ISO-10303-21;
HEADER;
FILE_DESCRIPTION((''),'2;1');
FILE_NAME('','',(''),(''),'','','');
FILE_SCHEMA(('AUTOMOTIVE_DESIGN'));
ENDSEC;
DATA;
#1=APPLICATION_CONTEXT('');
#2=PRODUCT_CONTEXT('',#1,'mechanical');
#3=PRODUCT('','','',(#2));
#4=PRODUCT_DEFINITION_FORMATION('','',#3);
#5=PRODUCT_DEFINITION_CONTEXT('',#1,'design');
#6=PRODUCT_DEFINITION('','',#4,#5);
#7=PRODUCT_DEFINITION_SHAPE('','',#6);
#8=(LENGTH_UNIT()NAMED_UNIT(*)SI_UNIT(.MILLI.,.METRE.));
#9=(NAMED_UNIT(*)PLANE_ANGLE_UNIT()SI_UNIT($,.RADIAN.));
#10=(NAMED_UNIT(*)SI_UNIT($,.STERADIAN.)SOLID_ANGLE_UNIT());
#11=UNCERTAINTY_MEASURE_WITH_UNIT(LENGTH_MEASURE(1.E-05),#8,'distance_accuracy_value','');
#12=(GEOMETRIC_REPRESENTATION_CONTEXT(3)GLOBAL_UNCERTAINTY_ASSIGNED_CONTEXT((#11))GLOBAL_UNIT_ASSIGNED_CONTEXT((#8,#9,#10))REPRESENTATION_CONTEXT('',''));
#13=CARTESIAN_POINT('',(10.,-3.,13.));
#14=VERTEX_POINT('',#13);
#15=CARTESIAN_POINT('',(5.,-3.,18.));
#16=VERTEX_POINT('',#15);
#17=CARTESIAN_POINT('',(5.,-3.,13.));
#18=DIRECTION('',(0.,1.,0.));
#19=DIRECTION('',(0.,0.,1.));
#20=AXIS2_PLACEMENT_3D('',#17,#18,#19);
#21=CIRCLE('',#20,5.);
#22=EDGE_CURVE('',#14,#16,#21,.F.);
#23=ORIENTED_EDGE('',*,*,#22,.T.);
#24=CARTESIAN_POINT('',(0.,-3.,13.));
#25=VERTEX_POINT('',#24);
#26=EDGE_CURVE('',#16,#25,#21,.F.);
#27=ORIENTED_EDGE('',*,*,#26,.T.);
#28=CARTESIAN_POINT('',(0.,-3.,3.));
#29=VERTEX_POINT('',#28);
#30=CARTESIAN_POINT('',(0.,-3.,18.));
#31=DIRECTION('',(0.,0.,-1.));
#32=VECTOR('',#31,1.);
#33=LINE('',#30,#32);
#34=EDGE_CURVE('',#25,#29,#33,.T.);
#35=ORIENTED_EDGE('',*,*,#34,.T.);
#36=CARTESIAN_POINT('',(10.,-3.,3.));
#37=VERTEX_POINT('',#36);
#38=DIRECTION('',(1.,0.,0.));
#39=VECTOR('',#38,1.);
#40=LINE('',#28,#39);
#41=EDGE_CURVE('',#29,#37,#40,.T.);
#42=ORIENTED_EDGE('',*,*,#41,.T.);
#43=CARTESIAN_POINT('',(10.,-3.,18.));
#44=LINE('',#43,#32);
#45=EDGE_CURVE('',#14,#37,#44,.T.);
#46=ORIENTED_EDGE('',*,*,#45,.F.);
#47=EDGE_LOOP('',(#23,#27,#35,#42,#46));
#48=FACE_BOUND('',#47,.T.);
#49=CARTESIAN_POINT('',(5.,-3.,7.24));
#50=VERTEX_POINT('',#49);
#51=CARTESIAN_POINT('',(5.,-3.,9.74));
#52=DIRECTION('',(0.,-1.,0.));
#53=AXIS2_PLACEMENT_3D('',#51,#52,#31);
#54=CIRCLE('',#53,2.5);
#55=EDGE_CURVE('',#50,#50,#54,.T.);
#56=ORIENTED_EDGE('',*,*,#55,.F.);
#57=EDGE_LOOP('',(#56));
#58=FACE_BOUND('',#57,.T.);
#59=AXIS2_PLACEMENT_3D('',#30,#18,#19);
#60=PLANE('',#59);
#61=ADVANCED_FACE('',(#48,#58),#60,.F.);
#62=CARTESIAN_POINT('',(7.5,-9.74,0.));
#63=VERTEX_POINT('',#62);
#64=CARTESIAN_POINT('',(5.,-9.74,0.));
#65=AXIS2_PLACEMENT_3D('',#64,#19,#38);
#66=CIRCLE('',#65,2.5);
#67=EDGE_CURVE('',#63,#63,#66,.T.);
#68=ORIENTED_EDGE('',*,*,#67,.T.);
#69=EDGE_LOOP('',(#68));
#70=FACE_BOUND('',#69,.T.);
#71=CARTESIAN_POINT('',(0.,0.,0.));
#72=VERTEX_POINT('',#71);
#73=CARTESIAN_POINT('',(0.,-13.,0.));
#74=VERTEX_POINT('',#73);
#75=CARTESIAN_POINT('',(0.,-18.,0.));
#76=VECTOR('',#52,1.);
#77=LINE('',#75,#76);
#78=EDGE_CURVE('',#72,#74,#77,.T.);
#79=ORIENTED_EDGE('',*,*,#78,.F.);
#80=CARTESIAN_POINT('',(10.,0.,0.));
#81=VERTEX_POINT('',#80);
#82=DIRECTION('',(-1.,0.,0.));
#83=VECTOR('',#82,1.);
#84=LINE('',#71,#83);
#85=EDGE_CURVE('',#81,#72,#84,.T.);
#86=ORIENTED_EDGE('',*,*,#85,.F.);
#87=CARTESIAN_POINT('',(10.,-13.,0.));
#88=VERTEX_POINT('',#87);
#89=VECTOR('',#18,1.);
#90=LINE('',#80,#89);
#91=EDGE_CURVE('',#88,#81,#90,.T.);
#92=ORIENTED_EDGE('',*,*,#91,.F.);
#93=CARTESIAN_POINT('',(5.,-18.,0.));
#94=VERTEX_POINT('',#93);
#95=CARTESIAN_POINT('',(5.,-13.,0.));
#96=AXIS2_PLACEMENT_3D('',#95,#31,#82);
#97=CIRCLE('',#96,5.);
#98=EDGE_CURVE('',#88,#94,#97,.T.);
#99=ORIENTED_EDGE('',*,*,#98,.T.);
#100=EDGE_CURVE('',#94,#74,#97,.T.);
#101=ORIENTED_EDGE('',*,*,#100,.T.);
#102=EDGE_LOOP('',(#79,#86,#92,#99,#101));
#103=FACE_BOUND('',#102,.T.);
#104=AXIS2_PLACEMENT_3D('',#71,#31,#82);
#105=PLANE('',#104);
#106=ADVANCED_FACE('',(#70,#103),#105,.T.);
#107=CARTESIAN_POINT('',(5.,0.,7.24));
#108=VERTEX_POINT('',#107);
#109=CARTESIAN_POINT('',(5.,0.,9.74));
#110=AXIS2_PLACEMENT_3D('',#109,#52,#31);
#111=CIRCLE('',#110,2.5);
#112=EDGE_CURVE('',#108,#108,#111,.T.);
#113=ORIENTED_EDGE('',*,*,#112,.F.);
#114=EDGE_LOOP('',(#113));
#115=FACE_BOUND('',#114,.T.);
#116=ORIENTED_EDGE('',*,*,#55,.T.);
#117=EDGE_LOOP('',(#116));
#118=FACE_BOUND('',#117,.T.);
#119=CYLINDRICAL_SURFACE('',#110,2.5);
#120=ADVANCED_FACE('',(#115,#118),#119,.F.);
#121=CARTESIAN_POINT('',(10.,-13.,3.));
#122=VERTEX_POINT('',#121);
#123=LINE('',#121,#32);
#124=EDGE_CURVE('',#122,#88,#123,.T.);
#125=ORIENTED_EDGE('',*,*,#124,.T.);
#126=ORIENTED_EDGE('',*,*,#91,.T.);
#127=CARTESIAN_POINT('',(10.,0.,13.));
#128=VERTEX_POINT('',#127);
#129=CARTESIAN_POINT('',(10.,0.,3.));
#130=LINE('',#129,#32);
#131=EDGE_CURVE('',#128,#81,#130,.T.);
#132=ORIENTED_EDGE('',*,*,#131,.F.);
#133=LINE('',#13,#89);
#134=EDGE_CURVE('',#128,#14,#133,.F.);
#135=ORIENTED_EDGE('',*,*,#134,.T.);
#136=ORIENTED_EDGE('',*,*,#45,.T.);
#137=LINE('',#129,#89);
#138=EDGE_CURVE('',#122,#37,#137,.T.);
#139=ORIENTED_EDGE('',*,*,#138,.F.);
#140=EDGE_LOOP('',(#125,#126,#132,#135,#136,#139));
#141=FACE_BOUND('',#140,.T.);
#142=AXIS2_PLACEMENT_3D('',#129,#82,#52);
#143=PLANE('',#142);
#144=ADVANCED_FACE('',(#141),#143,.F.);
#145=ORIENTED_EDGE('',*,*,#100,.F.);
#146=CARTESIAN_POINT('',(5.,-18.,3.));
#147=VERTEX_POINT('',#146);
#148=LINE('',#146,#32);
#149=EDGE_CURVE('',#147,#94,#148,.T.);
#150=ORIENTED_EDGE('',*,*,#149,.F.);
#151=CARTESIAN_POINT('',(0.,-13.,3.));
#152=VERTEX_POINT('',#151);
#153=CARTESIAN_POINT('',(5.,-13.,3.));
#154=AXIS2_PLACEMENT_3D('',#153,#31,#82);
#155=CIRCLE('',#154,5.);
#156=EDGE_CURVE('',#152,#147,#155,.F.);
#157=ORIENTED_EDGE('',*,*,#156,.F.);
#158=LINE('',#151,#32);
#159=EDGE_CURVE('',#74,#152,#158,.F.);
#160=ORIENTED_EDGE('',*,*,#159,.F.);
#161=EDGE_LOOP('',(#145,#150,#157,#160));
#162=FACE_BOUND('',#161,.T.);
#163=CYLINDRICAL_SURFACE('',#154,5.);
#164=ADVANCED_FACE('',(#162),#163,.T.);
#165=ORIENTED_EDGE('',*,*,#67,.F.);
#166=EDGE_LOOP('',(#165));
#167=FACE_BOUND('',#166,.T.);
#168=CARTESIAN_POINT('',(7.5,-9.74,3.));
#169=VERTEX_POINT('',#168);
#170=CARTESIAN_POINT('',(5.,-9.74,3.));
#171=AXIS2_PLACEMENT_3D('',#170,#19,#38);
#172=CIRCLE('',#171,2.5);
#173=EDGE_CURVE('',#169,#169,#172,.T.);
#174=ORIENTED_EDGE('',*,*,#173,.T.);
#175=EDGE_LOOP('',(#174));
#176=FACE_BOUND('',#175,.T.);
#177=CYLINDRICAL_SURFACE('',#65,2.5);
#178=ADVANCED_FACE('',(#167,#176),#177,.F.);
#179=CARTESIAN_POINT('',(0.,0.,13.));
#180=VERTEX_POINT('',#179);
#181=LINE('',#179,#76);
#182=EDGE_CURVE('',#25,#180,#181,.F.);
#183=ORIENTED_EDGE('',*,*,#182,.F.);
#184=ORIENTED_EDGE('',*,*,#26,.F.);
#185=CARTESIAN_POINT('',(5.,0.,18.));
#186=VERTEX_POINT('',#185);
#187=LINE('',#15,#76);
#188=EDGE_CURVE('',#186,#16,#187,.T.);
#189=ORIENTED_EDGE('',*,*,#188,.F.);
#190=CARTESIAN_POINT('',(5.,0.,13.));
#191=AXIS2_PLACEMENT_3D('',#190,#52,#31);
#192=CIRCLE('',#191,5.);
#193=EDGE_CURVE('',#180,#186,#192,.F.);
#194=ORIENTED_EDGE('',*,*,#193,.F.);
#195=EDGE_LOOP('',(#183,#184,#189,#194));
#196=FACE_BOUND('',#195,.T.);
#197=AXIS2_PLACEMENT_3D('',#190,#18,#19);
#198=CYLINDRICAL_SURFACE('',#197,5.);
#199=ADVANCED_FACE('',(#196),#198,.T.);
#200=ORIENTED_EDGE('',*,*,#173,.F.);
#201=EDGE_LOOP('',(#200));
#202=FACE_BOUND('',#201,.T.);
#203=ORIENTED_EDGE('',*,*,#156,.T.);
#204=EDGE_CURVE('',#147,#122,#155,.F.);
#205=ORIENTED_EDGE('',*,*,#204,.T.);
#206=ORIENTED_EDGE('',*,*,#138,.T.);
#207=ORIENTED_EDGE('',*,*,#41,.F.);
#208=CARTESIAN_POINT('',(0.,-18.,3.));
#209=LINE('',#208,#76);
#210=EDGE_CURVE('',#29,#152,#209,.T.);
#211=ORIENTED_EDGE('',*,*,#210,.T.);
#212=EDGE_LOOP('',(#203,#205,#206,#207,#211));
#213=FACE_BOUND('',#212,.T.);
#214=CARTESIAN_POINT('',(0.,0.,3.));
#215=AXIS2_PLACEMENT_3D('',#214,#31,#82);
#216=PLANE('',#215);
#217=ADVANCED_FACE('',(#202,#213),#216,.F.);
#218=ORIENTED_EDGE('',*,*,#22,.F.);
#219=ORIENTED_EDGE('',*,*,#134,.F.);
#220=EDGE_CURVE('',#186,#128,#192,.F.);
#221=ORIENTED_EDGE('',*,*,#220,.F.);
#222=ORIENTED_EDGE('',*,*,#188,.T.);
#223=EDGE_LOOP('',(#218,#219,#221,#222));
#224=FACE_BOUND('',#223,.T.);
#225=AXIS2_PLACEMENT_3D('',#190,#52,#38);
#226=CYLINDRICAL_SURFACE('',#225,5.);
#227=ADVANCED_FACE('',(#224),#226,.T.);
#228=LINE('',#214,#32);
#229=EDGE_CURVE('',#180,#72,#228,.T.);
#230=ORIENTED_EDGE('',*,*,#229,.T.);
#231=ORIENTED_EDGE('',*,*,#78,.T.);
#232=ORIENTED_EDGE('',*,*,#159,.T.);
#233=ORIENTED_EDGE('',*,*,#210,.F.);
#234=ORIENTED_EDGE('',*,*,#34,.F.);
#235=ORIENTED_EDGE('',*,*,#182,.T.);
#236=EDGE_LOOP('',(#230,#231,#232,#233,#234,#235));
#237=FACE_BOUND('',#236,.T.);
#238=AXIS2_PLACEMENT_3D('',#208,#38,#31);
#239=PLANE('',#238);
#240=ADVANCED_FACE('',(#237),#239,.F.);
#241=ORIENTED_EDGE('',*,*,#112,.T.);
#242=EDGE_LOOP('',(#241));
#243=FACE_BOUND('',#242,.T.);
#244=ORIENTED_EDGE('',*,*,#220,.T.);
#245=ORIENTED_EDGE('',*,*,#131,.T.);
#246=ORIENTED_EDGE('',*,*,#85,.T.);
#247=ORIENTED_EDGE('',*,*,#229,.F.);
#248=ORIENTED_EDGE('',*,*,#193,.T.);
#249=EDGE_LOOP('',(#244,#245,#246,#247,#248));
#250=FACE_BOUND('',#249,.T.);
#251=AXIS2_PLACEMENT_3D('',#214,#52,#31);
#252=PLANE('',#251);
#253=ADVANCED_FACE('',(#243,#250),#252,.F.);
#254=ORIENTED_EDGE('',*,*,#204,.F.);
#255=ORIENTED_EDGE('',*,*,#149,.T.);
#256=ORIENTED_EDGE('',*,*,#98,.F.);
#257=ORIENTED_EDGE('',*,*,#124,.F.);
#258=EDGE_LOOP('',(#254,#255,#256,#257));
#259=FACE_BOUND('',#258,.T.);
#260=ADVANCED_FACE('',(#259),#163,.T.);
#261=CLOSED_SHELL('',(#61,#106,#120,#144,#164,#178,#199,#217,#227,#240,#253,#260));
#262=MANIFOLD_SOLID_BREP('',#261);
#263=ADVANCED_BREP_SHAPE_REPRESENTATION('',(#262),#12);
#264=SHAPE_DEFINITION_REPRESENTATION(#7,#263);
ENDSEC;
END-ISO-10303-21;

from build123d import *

# Parameters (mm, degrees)
SKETCH_2_W          = 10
SKETCH_2_H          = 18
EXTRUDE_1_DEPTH     = 3
SKETCH_3_R          = 2.5
CUT_EXTRUDE_1_DEPTH = 21.808652047
FILLET_1_R          = 5
SKETCH_4_W          = 10
SKETCH_4_H          = 3
EXTRUDE_2_DEPTH     = 15
FILLET_2_R          = 5
SKETCH_5_R          = 2.5
CUT_EXTRUDE_2_DEPTH = 26.475478406
SKETCH_6_R          = 2.5
EXTRUDE_3_DEPTH     = 3
SKETCH_7_R          = 2.5
CUT_EXTRUDE_3_DEPTH = 26.475478406
SKETCH_8_R          = 2.580933604
EXTRUDE_4_DEPTH     = 3
SKETCH_9_R          = 2.5
CUT_EXTRUDE_4_DEPTH = 26.475478406
SKETCH_10_R         = 2.5
EXTRUDE_5_DEPTH     = 3
SKETCH_11_R         = 2.5
CUT_EXTRUDE_5_DEPTH = 26.475478406


with BuildPart() as part:
    # 草图2 → 凸台-拉伸1 (new body)
    with BuildSketch(Plane.XY):
        with Locations((5, -9)):
            Rectangle(SKETCH_2_W, SKETCH_2_H)
    extrude(amount=EXTRUDE_1_DEPTH)

    # 草图3 → 切除-拉伸1 (cut, through all)
    with BuildSketch(Plane.XY.offset(3)):
        with Locations((5, -9.74)):
            Circle(SKETCH_3_R)
    extrude(amount=-CUT_EXTRUDE_1_DEPTH, mode=Mode.SUBTRACT)

    # 圆角1
    fillet_1_edges = [part.edges().sort_by_distance(p)[0] for p in [
        (10, -18, 1.5),
        (0, -18, 1.5),
    ]]
    fillet(fillet_1_edges, radius=FILLET_1_R - 0.0001)  # a hair under: the kernel refuses the full size

    # 草图4 → 凸台-拉伸2 (add)
    with BuildSketch(Plane.XY.offset(3)):
        with Locations((5, -1.5)):
            Rectangle(SKETCH_4_W, SKETCH_4_H)
    extrude(amount=EXTRUDE_2_DEPTH)

    # 圆角2
    fillet_2_edges = [part.edges().sort_by_distance(p)[0] for p in [
        (10, -1.5, 18),
        (0, -1.5, 18),
    ]]
    fillet(fillet_2_edges, radius=FILLET_2_R - 0.0001)  # a hair under: the kernel refuses the full size

    # 草图5 → 切除-拉伸2 (cut, through all)
    with BuildSketch(Plane.XZ.offset(3)):
        with Locations(Location((5, 11.11, 0), (0, 0, 270))):
            Circle(SKETCH_5_R)
    extrude(amount=-CUT_EXTRUDE_2_DEPTH, mode=Mode.SUBTRACT)

    # 草图6 → 凸台-拉伸3 (add)
    with BuildSketch(Plane.XZ.offset(3)):
        with Locations((5, 11.11)):
            Circle(SKETCH_6_R)
    extrude(amount=-EXTRUDE_3_DEPTH)

    # 草图7 → 切除-拉伸3 (cut, through all)
    with BuildSketch(Plane(origin=(0, -3, 0), x_dir=(-1, 0, 0), z_dir=(0, -1, 0))):
        with Locations(Location((-5, -12.02, 0), (0, 0, 90))):
            Circle(SKETCH_7_R)
    extrude(amount=-CUT_EXTRUDE_3_DEPTH, mode=Mode.SUBTRACT)

    # 草图8 → 凸台-拉伸4 (add)
    with BuildSketch(Plane.XZ.offset(3)):
        with Locations((5, 12.02)):
            Circle(SKETCH_8_R)
    extrude(amount=-EXTRUDE_4_DEPTH)

    # 草图9 → 切除-拉伸4 (cut, through all)
    with BuildSketch(Plane.XZ.offset(3)):
        with Locations(Location((5, 8.11, 0), (0, 0, 270))):
            Circle(SKETCH_9_R)
    extrude(amount=-CUT_EXTRUDE_4_DEPTH, mode=Mode.SUBTRACT)

    # 草图10 → 凸台-拉伸5 (add)
    with BuildSketch(Plane.XZ.offset(3)):
        with Locations((5, 8.11)):
            Circle(SKETCH_10_R)
    extrude(amount=-EXTRUDE_5_DEPTH)

    # 草图11 → 切除-拉伸5 (cut, through all)
    with BuildSketch(Plane.XZ.offset(3)):
        with Locations(Location((5, 9.74, 0), (0, 0, 270))):
            Circle(SKETCH_11_R)
    extrude(amount=-CUT_EXTRUDE_5_DEPTH, mode=Mode.SUBTRACT)


solid = part.part
